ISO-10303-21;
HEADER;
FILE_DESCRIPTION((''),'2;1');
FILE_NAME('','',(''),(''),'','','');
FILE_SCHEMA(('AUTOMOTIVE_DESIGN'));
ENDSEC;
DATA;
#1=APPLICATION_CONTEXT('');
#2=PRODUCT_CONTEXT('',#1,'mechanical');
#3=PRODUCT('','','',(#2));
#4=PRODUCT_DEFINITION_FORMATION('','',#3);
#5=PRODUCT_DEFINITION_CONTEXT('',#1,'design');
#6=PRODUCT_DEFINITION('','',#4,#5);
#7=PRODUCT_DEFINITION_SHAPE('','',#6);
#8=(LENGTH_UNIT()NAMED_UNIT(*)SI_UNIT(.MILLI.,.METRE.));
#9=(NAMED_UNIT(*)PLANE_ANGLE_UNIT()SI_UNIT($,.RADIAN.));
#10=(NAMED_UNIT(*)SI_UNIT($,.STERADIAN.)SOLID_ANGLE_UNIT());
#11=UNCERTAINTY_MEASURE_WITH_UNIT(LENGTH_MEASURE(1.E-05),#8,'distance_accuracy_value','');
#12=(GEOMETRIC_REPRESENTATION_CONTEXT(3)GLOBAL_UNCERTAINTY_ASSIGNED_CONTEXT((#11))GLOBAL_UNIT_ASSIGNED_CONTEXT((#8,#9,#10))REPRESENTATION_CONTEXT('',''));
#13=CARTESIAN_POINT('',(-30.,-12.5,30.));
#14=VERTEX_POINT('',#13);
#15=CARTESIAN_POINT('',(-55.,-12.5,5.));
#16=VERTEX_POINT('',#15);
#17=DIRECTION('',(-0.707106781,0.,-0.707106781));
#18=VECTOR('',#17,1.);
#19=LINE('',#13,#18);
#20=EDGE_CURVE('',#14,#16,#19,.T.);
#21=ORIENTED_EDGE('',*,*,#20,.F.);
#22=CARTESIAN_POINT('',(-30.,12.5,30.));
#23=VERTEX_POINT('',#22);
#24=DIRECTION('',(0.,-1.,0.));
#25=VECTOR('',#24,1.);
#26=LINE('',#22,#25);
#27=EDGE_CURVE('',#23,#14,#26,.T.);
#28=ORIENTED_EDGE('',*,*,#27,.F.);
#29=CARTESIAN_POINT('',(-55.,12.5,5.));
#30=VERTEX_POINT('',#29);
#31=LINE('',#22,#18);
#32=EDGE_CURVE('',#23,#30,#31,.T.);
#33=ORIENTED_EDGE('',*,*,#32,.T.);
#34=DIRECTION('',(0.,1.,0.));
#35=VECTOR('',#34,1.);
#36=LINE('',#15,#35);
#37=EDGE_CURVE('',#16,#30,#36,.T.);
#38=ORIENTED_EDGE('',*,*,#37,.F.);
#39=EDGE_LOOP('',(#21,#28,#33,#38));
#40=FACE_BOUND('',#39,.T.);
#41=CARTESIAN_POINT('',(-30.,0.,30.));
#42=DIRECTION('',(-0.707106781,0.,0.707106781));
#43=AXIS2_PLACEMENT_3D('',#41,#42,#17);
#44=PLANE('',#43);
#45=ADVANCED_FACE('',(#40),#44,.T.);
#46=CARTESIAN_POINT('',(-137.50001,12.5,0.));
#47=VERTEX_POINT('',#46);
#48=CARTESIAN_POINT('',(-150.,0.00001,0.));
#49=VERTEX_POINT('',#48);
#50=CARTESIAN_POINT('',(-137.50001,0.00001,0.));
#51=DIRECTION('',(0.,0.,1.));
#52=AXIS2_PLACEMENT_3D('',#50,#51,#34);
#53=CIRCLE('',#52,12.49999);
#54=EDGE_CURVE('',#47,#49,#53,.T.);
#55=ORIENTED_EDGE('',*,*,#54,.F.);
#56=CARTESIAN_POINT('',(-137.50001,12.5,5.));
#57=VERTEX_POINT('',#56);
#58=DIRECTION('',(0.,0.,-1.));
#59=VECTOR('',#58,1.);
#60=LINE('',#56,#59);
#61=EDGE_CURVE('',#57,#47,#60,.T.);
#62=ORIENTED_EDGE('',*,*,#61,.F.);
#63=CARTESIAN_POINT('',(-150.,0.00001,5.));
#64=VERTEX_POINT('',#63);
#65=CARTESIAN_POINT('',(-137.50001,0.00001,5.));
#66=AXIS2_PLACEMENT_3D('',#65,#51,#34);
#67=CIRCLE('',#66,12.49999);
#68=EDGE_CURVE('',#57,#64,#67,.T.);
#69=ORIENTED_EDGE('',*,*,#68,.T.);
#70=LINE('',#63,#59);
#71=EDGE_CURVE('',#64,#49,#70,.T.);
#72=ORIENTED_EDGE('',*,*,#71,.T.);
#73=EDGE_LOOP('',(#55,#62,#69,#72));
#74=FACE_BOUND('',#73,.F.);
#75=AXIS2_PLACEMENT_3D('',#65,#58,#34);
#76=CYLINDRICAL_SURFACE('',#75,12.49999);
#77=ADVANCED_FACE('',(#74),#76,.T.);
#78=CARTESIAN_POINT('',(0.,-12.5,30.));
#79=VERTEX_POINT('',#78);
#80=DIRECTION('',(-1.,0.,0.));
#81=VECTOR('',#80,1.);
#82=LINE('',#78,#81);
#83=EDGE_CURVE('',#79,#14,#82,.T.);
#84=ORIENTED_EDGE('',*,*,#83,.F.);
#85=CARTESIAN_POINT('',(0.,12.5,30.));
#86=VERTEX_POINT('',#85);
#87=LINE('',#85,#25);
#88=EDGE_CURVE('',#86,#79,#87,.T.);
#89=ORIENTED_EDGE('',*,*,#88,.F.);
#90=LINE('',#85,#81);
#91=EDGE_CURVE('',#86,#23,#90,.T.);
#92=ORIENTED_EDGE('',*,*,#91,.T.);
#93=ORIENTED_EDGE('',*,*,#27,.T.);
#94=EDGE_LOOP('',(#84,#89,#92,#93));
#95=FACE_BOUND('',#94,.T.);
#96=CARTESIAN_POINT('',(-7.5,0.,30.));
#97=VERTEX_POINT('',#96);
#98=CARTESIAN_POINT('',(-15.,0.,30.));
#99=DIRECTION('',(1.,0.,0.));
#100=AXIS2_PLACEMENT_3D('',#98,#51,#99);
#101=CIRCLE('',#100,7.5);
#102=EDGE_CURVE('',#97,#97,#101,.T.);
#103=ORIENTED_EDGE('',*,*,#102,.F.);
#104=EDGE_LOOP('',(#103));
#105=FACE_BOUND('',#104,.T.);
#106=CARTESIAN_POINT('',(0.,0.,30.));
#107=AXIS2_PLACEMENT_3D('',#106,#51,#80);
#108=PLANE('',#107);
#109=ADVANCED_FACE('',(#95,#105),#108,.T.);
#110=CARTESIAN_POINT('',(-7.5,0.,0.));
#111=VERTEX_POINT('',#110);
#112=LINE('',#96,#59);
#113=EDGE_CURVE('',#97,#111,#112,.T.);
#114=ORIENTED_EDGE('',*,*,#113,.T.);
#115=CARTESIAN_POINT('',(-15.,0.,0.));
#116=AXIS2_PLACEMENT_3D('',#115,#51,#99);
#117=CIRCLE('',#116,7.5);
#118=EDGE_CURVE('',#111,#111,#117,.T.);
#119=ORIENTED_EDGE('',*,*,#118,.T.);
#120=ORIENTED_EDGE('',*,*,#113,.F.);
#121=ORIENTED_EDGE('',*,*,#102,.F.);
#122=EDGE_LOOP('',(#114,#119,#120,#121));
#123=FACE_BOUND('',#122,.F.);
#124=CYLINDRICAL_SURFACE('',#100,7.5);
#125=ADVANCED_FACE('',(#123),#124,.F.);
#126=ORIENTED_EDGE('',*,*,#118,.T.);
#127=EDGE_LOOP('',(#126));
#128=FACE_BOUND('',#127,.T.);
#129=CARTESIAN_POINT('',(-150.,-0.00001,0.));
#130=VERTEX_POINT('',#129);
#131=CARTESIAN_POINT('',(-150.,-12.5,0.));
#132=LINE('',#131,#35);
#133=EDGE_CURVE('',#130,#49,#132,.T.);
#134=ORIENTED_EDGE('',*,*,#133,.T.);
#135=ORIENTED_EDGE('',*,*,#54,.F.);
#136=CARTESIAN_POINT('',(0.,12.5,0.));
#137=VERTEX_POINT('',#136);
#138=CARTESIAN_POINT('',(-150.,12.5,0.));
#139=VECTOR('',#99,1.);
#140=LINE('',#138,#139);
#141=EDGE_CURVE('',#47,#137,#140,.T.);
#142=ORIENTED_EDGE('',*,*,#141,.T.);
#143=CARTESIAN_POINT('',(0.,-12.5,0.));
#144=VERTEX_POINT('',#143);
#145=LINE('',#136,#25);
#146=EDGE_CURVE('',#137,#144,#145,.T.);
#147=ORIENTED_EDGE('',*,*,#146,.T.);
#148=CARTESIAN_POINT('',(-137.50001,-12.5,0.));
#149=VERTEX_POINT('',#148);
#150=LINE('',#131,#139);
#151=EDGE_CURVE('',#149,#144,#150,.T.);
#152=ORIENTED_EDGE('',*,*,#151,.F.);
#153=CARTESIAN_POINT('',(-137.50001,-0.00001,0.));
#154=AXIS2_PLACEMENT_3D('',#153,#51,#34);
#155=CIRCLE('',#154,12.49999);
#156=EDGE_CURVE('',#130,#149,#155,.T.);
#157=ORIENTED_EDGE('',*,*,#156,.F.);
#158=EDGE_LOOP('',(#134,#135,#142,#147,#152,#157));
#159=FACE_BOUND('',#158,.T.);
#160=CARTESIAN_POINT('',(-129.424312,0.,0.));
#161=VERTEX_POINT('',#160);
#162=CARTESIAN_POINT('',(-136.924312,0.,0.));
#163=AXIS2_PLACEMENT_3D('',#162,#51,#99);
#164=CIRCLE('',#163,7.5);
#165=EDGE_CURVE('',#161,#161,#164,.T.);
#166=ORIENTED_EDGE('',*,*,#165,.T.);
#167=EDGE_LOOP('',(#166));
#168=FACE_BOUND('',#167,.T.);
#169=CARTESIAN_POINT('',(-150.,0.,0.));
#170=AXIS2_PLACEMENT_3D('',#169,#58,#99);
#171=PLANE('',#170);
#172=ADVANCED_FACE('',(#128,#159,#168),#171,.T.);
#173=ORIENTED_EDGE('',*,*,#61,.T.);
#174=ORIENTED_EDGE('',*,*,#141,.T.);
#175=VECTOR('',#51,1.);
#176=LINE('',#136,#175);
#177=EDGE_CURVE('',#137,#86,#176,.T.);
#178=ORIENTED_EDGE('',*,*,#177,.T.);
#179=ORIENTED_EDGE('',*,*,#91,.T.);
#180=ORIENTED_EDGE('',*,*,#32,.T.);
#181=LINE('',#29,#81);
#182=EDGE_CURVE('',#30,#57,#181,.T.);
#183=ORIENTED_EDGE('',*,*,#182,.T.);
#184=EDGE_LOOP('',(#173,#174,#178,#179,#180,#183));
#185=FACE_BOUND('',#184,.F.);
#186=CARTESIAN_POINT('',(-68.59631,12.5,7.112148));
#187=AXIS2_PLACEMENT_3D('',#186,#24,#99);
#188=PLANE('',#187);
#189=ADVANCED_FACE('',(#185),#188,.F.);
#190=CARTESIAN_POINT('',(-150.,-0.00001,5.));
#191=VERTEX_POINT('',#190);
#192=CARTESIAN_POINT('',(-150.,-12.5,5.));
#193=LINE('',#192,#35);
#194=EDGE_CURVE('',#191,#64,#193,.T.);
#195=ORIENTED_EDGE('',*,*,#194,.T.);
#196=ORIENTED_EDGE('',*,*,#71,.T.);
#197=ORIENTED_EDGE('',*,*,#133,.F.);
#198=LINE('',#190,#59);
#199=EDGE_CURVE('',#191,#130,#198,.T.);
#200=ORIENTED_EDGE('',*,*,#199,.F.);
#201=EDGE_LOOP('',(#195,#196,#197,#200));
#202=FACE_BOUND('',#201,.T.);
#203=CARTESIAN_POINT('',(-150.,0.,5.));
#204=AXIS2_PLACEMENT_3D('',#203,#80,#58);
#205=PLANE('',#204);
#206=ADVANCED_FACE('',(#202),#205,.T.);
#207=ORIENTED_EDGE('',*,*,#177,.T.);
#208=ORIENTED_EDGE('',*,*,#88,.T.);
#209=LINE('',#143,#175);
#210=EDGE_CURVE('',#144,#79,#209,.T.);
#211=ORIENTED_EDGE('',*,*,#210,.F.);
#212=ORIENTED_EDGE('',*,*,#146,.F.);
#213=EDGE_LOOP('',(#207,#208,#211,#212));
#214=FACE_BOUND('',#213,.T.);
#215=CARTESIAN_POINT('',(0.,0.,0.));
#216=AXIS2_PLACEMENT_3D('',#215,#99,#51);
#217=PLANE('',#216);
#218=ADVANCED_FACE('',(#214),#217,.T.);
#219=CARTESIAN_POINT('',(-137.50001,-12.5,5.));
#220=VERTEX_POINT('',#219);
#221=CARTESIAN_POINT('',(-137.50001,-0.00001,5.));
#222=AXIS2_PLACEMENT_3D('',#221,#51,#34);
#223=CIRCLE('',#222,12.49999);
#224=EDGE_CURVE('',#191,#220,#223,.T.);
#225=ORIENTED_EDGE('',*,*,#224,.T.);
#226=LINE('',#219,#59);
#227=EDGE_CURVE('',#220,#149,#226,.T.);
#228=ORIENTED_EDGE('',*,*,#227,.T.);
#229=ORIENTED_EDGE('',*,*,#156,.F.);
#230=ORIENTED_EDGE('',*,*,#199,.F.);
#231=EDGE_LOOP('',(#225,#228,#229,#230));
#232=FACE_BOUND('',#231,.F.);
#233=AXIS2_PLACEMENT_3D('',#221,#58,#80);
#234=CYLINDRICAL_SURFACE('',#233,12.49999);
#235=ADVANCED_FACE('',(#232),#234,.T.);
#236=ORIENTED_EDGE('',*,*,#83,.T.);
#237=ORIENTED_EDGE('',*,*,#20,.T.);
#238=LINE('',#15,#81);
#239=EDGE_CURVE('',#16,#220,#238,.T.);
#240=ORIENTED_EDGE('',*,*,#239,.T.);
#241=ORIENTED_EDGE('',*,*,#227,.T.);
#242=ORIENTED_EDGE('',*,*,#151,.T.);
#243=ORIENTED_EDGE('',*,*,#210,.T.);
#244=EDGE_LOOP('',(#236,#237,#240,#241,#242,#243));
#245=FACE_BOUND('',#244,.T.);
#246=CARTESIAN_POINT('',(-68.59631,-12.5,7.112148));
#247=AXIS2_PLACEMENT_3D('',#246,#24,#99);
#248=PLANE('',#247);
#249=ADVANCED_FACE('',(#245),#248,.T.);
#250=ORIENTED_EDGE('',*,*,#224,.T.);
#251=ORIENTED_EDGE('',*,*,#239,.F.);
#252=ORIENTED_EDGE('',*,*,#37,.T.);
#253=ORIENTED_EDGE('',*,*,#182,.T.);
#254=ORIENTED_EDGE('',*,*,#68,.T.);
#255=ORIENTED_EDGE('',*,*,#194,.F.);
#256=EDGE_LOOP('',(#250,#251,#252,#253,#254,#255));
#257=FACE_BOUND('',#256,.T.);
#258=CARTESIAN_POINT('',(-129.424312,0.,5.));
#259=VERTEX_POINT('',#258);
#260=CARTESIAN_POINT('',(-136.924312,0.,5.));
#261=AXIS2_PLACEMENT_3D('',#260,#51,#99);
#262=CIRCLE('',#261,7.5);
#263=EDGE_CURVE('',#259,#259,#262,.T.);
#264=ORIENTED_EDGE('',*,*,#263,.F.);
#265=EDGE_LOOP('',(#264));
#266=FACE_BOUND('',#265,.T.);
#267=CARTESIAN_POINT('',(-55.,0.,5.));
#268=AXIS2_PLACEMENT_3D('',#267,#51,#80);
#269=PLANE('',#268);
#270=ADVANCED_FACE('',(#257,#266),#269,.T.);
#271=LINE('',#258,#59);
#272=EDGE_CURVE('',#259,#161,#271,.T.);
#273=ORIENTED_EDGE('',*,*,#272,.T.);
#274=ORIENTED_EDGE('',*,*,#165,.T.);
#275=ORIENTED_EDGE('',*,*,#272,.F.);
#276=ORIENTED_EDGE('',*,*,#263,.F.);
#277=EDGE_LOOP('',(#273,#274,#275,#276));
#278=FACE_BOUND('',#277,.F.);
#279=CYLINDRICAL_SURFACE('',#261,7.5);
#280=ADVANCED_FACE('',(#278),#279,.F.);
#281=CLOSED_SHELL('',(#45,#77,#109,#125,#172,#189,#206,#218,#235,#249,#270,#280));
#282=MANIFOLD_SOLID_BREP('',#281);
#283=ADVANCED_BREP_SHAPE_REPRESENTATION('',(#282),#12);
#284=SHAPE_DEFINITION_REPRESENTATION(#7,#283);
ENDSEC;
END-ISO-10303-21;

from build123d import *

# Parameters (mm, degrees)
F1_DEPTH = 12.5
F2_R     = 7.5
F3_DEPTH = 30
F5_R     = 12.49999
F4_R     = 7.5
F6_DEPTH = 5


# Not quite as in the source:
# - a fillet or chamfer is up to 0.001 mm smaller than in the source, because OpenCascade refuses the exact size


with BuildPart() as f1:
    # F0 (on Front) → F1 (new body, symmetric)
    with BuildSketch(Plane.XZ):
        Polygon((-150, 0), (0, 0), (0, 30), (-30, 30), (-55, 5), (-150, 5), align=None)
    extrude(amount=F1_DEPTH, both=True)

    # F2 (on face) → F3 (cut, through all)
    with BuildSketch(Plane.XY.offset(30)):
        with Locations((-15, 0)):
            Circle(F2_R)
    extrude(amount=-F3_DEPTH, mode=Mode.SUBTRACT)

    # F5 (radius 12.5 in the source; OpenCascade refuses exactly that, so slightly less here)
    f5_edges = [f1.edges().sort_by_distance(p)[0] for p in [
        (-150, 12.5, 2.5),
        (-150, -12.5, 2.5),
    ]]
    fillet(f5_edges, radius=F5_R)

    # F4 (on face) → F6 (cut, through all)
    with BuildSketch(Plane.XY.offset(5)):
        with Locations((-136.9243115187, 0)):
            Circle(F4_R)
    extrude(amount=-F6_DEPTH, mode=Mode.SUBTRACT)


solid = f1.part
